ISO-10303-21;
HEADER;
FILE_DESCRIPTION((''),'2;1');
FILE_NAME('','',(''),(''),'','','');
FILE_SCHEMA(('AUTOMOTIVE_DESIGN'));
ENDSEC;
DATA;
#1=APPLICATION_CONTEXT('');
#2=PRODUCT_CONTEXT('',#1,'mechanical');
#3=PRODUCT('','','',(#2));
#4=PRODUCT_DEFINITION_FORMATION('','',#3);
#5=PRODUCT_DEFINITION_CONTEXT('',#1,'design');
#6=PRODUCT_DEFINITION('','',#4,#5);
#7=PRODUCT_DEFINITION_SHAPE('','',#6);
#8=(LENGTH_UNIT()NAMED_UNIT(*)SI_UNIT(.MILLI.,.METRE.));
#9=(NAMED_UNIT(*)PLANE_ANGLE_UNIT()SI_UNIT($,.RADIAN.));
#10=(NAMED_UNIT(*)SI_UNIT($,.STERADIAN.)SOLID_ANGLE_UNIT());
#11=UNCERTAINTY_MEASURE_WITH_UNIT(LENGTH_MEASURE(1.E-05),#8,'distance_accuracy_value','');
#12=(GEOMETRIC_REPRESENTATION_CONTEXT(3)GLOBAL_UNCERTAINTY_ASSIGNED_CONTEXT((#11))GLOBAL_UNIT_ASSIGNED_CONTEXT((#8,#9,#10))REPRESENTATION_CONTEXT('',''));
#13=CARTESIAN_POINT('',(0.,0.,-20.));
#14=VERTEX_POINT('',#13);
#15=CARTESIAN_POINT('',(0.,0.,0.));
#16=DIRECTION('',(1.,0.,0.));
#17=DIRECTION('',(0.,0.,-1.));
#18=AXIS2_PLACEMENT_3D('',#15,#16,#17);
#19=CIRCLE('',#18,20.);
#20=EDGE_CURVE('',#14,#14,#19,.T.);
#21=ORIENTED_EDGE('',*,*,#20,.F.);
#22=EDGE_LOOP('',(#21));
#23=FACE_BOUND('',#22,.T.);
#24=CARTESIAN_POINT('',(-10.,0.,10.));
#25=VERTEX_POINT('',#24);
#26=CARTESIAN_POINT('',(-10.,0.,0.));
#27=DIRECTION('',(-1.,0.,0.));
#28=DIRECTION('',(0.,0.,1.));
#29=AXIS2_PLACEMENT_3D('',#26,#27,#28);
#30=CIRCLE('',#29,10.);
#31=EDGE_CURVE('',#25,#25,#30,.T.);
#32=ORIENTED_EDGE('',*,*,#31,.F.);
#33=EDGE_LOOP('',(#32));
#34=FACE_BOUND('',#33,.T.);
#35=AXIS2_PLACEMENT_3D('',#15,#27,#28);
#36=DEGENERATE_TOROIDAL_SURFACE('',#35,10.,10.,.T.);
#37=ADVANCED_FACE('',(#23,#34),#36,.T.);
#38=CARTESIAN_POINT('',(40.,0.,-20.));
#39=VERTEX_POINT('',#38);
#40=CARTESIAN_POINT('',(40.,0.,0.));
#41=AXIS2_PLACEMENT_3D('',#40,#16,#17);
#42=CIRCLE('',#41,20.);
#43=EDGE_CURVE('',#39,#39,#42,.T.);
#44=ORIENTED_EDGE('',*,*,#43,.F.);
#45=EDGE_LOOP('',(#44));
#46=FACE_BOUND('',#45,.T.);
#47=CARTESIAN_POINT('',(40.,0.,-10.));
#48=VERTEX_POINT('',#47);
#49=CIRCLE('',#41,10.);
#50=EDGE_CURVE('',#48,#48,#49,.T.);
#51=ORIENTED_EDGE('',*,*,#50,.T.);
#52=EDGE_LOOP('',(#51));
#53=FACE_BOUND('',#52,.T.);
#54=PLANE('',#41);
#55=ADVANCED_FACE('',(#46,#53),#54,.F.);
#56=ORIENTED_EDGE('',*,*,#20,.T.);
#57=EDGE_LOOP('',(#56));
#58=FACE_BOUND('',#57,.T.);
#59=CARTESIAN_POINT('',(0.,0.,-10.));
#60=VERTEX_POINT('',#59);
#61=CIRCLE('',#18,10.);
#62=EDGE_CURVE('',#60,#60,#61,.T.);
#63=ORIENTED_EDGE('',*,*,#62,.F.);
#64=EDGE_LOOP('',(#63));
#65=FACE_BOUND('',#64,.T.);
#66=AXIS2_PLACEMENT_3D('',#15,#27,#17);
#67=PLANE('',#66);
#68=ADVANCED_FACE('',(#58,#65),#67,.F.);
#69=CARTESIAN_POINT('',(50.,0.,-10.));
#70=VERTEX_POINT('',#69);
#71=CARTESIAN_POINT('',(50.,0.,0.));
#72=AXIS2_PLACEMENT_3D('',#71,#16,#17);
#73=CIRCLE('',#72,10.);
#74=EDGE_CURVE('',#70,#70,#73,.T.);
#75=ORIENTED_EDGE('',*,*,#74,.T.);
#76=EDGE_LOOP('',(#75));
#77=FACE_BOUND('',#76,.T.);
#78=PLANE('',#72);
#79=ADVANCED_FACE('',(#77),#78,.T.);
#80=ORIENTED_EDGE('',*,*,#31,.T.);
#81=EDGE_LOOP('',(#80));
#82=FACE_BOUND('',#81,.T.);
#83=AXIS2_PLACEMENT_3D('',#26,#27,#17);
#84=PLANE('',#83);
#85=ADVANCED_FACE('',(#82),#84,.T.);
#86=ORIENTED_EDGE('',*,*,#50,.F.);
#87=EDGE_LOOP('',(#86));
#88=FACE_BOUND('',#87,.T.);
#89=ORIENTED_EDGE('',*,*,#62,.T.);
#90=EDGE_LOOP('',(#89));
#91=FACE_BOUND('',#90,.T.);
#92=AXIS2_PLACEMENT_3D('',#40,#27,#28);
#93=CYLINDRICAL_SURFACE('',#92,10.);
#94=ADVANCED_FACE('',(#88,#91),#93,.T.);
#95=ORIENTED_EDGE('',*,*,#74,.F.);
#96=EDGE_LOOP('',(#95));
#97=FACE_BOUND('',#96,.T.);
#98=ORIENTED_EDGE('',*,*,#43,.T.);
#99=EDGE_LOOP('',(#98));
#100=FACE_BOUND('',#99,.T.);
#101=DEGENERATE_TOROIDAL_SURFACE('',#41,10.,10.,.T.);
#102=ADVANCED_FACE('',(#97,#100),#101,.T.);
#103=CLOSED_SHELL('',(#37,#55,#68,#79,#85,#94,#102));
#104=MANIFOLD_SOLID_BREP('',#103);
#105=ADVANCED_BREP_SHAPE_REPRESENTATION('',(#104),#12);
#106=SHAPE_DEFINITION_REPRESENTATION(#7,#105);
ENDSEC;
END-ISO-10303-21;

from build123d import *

# Parameters (mm, degrees)
SKETCH1_R            = 10
BOSS_EXTRUDE1_DEPTH  = 40
SKETCH2_R            = 20
BOSS_EXTRUDE2_DEPTH  = 10
FILLET1_R            = 10
FILLET1_OF_MIRROR1_R = 10


with BuildPart() as part:
    # Sketch1 → Boss-Extrude1 (new body)
    with BuildSketch(Plane(origin=(0, 0, 0), x_dir=(0, 0, -1), z_dir=(1, 0, 0))):
        Circle(SKETCH1_R)
    extrude(amount=BOSS_EXTRUDE1_DEPTH)

    # Sketch2 → Boss-Extrude2 (add)
    with BuildSketch(Plane(origin=(40, 0, 0), x_dir=(0, 0, -1), z_dir=(1, 0, 0))):
        Circle(SKETCH2_R)
    boss_extrude2 = extrude(amount=BOSS_EXTRUDE2_DEPTH)

    # Fillet1
    fillet1_edges = [part.edges().sort_by_distance(p)[0] for p in [
        (50, 0, 20),
    ]]
    fillet(fillet1_edges, radius=FILLET1_R - 0.0001)  # a hair under: the kernel refuses the full size

    # Mirror1: Boss-Extrude2 across plane
    add(boss_extrude2.mirror(Plane.ZY.offset(-20)))

    # Fillet1 of Mirror1
    fillet1_of_mirror1_edges = [part.edges().sort_by_distance(p)[0] for p in [
        (-10, 0, 20),
    ]]
    fillet(fillet1_of_mirror1_edges, radius=FILLET1_OF_MIRROR1_R - 0.0001)  # a hair under: the kernel refuses the full size


solid = part.part
